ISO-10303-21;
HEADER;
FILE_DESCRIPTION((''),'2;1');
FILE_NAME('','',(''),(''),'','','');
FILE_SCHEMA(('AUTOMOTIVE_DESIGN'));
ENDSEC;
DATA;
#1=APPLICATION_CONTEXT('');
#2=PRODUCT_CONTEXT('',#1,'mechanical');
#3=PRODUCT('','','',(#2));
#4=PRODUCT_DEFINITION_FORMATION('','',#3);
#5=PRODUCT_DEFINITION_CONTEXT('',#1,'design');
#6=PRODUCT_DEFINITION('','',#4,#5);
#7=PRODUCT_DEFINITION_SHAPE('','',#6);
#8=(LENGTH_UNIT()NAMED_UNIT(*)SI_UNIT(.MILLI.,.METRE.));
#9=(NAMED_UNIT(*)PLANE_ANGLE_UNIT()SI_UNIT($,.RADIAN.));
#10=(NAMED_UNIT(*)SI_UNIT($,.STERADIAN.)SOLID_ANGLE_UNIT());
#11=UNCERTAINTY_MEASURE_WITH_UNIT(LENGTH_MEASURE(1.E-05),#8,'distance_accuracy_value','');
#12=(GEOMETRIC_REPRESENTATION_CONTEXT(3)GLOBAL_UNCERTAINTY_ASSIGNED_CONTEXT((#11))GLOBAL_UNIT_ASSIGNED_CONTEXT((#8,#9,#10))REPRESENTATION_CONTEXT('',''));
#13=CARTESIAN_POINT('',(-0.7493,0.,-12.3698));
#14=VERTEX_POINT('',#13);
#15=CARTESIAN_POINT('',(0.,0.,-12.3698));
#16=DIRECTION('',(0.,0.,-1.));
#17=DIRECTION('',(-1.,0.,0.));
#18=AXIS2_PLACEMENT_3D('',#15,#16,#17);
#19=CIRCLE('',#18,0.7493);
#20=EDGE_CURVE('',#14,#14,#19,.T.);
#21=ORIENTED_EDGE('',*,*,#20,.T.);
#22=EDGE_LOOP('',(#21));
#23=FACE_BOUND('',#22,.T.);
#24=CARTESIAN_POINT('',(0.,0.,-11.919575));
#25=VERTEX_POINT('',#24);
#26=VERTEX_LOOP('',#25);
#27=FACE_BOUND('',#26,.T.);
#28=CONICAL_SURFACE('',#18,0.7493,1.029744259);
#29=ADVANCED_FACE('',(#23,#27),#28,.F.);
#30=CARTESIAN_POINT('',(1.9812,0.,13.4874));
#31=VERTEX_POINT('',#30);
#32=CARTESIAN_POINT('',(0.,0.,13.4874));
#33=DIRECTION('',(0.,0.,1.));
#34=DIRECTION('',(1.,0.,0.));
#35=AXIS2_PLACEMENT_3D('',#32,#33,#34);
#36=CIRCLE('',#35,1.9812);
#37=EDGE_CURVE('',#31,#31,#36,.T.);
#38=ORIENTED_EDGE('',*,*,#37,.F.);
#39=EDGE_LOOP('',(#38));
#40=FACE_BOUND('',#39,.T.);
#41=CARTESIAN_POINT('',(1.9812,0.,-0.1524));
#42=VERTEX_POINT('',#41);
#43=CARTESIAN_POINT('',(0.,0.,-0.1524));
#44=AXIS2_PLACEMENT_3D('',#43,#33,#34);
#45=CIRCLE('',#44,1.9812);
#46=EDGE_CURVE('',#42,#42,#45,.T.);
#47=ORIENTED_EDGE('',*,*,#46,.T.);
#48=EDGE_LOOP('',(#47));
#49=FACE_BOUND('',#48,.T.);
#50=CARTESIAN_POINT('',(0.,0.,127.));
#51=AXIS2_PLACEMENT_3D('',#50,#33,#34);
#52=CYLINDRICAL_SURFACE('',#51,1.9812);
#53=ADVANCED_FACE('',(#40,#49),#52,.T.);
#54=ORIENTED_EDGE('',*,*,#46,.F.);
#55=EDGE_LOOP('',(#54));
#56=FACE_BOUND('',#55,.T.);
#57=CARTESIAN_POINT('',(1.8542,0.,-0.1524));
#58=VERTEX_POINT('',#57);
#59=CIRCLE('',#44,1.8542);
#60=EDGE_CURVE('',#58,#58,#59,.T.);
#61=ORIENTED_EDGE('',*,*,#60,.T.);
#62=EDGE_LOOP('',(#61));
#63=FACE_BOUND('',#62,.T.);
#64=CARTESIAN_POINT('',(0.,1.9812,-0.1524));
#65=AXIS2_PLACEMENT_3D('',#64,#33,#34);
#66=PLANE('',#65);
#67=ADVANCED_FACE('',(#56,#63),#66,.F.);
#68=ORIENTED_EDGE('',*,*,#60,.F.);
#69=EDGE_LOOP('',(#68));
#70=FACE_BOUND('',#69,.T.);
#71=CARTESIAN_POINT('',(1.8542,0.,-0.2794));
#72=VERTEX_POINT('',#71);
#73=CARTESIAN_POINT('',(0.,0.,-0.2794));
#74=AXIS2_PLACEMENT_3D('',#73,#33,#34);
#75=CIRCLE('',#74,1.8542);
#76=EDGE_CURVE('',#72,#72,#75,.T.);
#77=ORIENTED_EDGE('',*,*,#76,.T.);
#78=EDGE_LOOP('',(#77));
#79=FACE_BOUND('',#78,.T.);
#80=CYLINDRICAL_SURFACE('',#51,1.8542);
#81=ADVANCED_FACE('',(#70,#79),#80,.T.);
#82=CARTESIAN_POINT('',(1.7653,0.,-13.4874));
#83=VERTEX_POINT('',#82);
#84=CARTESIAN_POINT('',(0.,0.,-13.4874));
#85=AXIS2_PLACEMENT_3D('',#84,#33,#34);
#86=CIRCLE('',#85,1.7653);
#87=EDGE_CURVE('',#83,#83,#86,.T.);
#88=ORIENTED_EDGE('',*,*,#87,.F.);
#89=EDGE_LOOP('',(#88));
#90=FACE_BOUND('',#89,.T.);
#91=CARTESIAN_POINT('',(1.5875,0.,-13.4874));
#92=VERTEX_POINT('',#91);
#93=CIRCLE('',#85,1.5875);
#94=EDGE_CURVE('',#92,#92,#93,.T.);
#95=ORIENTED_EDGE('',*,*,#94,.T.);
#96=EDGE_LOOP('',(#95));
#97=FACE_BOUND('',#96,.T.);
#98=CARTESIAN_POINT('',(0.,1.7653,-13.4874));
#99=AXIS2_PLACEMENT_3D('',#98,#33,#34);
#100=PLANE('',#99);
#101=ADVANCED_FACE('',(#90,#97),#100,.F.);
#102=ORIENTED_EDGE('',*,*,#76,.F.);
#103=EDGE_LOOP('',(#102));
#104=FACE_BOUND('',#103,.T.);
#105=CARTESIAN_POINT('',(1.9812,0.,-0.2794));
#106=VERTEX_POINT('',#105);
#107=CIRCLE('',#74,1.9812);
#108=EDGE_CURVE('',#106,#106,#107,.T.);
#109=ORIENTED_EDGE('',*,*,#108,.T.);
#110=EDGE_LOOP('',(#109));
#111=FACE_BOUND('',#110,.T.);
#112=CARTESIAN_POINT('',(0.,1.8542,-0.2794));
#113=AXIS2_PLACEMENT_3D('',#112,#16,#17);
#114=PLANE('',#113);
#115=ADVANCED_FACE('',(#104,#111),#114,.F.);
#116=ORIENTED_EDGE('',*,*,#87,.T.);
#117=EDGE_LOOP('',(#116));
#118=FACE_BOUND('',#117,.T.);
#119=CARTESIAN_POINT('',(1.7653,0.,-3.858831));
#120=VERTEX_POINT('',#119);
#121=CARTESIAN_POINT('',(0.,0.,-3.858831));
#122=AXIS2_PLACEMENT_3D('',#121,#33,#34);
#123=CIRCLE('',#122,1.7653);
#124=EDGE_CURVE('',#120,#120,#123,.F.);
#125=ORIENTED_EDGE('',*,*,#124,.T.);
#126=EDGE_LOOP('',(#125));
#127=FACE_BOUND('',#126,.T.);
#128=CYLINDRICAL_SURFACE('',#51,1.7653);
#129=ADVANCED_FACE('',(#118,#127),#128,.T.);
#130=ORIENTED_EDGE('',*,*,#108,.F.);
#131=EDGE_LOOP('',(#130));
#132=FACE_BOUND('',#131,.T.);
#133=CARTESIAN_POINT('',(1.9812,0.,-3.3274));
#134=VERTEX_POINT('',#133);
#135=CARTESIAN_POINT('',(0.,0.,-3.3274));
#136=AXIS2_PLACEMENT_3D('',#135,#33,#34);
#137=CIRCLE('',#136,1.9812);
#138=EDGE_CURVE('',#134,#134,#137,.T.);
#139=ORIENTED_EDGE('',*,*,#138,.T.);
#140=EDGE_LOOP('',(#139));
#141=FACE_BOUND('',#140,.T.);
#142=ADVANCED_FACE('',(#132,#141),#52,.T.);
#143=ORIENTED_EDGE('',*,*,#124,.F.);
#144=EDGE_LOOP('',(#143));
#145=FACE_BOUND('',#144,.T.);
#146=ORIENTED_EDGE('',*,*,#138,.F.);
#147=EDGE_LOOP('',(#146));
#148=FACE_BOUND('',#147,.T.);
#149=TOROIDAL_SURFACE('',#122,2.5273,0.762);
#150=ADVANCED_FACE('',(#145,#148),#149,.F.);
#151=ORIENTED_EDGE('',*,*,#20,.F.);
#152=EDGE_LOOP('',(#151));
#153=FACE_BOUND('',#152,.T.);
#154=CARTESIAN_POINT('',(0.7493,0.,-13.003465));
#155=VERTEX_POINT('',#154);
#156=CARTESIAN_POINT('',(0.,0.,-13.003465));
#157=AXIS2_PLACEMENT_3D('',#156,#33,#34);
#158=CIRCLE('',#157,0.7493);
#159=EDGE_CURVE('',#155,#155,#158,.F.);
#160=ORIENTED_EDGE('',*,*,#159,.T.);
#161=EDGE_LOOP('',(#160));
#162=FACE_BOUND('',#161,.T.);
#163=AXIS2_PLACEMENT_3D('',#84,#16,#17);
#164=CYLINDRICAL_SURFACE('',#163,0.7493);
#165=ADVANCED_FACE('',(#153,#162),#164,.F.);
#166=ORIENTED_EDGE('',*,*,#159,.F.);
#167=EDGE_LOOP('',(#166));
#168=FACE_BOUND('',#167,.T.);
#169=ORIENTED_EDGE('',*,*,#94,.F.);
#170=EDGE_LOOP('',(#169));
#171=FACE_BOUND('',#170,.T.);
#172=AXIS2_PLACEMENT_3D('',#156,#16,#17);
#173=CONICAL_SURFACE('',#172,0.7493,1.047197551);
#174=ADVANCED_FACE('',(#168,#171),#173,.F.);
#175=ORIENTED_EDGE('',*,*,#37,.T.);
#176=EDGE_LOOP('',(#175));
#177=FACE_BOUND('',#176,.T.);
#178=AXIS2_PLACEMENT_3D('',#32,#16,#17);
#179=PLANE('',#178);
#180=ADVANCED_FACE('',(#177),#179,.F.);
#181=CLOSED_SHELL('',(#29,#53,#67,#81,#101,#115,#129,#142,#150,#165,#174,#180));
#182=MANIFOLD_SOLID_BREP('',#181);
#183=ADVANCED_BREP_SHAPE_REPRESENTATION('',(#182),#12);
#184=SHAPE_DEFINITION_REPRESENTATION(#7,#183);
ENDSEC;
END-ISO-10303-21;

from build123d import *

# Parameters (mm, degrees)
REDONDEO1_R                      = 0.762
TALADRO_DE_MARGEN_PARA_101_D     = 1.4986
TALADRO_DE_MARGEN_PARA_101_DEPTH = 1.1176
TALADRO_DE_MARGEN_PARA_101_TIP   = 0.450224862
CHAFL_N1_SIZE                    = 0.8382
CHAFL_N1_SIZE2                   = 0.483934996


with BuildPart() as part:
    # Croquis1 → Revolución1 (revolve)
    with BuildSketch(Plane(origin=(0, 0, 0), x_dir=(0, 0, -1), z_dir=(1, 0, 0)), mode=Mode.PRIVATE) as revoluci_n1_sk:
        Polygon((-13.4874, 0), (-13.4874, 1.9812), (0.1524, 1.9812), (0.1524, 1.8542), (0.2794, 1.8542), (0.2794, 1.9812), (3.3274, 1.9812), (3.3274, 1.7653), (13.4874, 1.7653), (13.4874, 0), align=None)
    revolve(revoluci_n1_sk.sketch.rotate(Axis((0, 0, 127), (0, 0, -1)), 90), axis=Axis((0, 0, 127), (0, 0, -1)))

    # Redondeo1
    # the kernel refuses this fillet: 0.762 mm, written as the material it adds along each edge
    with BuildSketch(Plane(origin=(0, 0, -3.3274), x_dir=(1, 0, 0), z_dir=(0, 1, 0))) as redondeo1_piece_1:
        with BuildLine():
            CenterArc((2.5273, 0.531430889), REDONDEO1_R, 180, 44.220044428)
            Line((1.7653, 0.531430889), (1.75006, 0.531430889))
            Line((1.75006, 0.531430889), (1.75006, 0))
            Line((1.75006, 0), (1.7653, -0.01524))
            ThreePointArc((1.7653, -0.01524), (1.87325, -0.01524), (1.970278, -0.010628618))
            Line((1.970278, -0.010628618), (1.9812, 0))
        make_face()
    revolve(axis=Axis((0, 0, -3.3274), (0, 0, -1)))

    # Taladro de margen para #101
    with Locations(Plane(origin=(0, 0, -13.4874), x_dir=(-1, 0, 0), z_dir=(0, 0, -1))):
        with Locations((0, 0)):
            Hole(TALADRO_DE_MARGEN_PARA_101_D / 2, depth=TALADRO_DE_MARGEN_PARA_101_DEPTH)
            with Locations((0, 0, -(TALADRO_DE_MARGEN_PARA_101_DEPTH + TALADRO_DE_MARGEN_PARA_101_TIP / 2))):  # 118° drill point
                Cone(0, TALADRO_DE_MARGEN_PARA_101_D / 2, TALADRO_DE_MARGEN_PARA_101_TIP, mode=Mode.SUBTRACT)

    # Chaflán1
    chafl_n1_edges = [part.edges().sort_by_distance(p)[0] for p in [
        (-0.7493, 0, -13.4874),
    ]]
    chafl_n1_side = [part.faces().sort_by_distance(p)[0] for p in [
        (-1.715369776, 0, -13.4874),
    ]]
    chamfer(chafl_n1_edges, length=CHAFL_N1_SIZE, length2=CHAFL_N1_SIZE2, reference=chafl_n1_side[0])


solid = part.part
